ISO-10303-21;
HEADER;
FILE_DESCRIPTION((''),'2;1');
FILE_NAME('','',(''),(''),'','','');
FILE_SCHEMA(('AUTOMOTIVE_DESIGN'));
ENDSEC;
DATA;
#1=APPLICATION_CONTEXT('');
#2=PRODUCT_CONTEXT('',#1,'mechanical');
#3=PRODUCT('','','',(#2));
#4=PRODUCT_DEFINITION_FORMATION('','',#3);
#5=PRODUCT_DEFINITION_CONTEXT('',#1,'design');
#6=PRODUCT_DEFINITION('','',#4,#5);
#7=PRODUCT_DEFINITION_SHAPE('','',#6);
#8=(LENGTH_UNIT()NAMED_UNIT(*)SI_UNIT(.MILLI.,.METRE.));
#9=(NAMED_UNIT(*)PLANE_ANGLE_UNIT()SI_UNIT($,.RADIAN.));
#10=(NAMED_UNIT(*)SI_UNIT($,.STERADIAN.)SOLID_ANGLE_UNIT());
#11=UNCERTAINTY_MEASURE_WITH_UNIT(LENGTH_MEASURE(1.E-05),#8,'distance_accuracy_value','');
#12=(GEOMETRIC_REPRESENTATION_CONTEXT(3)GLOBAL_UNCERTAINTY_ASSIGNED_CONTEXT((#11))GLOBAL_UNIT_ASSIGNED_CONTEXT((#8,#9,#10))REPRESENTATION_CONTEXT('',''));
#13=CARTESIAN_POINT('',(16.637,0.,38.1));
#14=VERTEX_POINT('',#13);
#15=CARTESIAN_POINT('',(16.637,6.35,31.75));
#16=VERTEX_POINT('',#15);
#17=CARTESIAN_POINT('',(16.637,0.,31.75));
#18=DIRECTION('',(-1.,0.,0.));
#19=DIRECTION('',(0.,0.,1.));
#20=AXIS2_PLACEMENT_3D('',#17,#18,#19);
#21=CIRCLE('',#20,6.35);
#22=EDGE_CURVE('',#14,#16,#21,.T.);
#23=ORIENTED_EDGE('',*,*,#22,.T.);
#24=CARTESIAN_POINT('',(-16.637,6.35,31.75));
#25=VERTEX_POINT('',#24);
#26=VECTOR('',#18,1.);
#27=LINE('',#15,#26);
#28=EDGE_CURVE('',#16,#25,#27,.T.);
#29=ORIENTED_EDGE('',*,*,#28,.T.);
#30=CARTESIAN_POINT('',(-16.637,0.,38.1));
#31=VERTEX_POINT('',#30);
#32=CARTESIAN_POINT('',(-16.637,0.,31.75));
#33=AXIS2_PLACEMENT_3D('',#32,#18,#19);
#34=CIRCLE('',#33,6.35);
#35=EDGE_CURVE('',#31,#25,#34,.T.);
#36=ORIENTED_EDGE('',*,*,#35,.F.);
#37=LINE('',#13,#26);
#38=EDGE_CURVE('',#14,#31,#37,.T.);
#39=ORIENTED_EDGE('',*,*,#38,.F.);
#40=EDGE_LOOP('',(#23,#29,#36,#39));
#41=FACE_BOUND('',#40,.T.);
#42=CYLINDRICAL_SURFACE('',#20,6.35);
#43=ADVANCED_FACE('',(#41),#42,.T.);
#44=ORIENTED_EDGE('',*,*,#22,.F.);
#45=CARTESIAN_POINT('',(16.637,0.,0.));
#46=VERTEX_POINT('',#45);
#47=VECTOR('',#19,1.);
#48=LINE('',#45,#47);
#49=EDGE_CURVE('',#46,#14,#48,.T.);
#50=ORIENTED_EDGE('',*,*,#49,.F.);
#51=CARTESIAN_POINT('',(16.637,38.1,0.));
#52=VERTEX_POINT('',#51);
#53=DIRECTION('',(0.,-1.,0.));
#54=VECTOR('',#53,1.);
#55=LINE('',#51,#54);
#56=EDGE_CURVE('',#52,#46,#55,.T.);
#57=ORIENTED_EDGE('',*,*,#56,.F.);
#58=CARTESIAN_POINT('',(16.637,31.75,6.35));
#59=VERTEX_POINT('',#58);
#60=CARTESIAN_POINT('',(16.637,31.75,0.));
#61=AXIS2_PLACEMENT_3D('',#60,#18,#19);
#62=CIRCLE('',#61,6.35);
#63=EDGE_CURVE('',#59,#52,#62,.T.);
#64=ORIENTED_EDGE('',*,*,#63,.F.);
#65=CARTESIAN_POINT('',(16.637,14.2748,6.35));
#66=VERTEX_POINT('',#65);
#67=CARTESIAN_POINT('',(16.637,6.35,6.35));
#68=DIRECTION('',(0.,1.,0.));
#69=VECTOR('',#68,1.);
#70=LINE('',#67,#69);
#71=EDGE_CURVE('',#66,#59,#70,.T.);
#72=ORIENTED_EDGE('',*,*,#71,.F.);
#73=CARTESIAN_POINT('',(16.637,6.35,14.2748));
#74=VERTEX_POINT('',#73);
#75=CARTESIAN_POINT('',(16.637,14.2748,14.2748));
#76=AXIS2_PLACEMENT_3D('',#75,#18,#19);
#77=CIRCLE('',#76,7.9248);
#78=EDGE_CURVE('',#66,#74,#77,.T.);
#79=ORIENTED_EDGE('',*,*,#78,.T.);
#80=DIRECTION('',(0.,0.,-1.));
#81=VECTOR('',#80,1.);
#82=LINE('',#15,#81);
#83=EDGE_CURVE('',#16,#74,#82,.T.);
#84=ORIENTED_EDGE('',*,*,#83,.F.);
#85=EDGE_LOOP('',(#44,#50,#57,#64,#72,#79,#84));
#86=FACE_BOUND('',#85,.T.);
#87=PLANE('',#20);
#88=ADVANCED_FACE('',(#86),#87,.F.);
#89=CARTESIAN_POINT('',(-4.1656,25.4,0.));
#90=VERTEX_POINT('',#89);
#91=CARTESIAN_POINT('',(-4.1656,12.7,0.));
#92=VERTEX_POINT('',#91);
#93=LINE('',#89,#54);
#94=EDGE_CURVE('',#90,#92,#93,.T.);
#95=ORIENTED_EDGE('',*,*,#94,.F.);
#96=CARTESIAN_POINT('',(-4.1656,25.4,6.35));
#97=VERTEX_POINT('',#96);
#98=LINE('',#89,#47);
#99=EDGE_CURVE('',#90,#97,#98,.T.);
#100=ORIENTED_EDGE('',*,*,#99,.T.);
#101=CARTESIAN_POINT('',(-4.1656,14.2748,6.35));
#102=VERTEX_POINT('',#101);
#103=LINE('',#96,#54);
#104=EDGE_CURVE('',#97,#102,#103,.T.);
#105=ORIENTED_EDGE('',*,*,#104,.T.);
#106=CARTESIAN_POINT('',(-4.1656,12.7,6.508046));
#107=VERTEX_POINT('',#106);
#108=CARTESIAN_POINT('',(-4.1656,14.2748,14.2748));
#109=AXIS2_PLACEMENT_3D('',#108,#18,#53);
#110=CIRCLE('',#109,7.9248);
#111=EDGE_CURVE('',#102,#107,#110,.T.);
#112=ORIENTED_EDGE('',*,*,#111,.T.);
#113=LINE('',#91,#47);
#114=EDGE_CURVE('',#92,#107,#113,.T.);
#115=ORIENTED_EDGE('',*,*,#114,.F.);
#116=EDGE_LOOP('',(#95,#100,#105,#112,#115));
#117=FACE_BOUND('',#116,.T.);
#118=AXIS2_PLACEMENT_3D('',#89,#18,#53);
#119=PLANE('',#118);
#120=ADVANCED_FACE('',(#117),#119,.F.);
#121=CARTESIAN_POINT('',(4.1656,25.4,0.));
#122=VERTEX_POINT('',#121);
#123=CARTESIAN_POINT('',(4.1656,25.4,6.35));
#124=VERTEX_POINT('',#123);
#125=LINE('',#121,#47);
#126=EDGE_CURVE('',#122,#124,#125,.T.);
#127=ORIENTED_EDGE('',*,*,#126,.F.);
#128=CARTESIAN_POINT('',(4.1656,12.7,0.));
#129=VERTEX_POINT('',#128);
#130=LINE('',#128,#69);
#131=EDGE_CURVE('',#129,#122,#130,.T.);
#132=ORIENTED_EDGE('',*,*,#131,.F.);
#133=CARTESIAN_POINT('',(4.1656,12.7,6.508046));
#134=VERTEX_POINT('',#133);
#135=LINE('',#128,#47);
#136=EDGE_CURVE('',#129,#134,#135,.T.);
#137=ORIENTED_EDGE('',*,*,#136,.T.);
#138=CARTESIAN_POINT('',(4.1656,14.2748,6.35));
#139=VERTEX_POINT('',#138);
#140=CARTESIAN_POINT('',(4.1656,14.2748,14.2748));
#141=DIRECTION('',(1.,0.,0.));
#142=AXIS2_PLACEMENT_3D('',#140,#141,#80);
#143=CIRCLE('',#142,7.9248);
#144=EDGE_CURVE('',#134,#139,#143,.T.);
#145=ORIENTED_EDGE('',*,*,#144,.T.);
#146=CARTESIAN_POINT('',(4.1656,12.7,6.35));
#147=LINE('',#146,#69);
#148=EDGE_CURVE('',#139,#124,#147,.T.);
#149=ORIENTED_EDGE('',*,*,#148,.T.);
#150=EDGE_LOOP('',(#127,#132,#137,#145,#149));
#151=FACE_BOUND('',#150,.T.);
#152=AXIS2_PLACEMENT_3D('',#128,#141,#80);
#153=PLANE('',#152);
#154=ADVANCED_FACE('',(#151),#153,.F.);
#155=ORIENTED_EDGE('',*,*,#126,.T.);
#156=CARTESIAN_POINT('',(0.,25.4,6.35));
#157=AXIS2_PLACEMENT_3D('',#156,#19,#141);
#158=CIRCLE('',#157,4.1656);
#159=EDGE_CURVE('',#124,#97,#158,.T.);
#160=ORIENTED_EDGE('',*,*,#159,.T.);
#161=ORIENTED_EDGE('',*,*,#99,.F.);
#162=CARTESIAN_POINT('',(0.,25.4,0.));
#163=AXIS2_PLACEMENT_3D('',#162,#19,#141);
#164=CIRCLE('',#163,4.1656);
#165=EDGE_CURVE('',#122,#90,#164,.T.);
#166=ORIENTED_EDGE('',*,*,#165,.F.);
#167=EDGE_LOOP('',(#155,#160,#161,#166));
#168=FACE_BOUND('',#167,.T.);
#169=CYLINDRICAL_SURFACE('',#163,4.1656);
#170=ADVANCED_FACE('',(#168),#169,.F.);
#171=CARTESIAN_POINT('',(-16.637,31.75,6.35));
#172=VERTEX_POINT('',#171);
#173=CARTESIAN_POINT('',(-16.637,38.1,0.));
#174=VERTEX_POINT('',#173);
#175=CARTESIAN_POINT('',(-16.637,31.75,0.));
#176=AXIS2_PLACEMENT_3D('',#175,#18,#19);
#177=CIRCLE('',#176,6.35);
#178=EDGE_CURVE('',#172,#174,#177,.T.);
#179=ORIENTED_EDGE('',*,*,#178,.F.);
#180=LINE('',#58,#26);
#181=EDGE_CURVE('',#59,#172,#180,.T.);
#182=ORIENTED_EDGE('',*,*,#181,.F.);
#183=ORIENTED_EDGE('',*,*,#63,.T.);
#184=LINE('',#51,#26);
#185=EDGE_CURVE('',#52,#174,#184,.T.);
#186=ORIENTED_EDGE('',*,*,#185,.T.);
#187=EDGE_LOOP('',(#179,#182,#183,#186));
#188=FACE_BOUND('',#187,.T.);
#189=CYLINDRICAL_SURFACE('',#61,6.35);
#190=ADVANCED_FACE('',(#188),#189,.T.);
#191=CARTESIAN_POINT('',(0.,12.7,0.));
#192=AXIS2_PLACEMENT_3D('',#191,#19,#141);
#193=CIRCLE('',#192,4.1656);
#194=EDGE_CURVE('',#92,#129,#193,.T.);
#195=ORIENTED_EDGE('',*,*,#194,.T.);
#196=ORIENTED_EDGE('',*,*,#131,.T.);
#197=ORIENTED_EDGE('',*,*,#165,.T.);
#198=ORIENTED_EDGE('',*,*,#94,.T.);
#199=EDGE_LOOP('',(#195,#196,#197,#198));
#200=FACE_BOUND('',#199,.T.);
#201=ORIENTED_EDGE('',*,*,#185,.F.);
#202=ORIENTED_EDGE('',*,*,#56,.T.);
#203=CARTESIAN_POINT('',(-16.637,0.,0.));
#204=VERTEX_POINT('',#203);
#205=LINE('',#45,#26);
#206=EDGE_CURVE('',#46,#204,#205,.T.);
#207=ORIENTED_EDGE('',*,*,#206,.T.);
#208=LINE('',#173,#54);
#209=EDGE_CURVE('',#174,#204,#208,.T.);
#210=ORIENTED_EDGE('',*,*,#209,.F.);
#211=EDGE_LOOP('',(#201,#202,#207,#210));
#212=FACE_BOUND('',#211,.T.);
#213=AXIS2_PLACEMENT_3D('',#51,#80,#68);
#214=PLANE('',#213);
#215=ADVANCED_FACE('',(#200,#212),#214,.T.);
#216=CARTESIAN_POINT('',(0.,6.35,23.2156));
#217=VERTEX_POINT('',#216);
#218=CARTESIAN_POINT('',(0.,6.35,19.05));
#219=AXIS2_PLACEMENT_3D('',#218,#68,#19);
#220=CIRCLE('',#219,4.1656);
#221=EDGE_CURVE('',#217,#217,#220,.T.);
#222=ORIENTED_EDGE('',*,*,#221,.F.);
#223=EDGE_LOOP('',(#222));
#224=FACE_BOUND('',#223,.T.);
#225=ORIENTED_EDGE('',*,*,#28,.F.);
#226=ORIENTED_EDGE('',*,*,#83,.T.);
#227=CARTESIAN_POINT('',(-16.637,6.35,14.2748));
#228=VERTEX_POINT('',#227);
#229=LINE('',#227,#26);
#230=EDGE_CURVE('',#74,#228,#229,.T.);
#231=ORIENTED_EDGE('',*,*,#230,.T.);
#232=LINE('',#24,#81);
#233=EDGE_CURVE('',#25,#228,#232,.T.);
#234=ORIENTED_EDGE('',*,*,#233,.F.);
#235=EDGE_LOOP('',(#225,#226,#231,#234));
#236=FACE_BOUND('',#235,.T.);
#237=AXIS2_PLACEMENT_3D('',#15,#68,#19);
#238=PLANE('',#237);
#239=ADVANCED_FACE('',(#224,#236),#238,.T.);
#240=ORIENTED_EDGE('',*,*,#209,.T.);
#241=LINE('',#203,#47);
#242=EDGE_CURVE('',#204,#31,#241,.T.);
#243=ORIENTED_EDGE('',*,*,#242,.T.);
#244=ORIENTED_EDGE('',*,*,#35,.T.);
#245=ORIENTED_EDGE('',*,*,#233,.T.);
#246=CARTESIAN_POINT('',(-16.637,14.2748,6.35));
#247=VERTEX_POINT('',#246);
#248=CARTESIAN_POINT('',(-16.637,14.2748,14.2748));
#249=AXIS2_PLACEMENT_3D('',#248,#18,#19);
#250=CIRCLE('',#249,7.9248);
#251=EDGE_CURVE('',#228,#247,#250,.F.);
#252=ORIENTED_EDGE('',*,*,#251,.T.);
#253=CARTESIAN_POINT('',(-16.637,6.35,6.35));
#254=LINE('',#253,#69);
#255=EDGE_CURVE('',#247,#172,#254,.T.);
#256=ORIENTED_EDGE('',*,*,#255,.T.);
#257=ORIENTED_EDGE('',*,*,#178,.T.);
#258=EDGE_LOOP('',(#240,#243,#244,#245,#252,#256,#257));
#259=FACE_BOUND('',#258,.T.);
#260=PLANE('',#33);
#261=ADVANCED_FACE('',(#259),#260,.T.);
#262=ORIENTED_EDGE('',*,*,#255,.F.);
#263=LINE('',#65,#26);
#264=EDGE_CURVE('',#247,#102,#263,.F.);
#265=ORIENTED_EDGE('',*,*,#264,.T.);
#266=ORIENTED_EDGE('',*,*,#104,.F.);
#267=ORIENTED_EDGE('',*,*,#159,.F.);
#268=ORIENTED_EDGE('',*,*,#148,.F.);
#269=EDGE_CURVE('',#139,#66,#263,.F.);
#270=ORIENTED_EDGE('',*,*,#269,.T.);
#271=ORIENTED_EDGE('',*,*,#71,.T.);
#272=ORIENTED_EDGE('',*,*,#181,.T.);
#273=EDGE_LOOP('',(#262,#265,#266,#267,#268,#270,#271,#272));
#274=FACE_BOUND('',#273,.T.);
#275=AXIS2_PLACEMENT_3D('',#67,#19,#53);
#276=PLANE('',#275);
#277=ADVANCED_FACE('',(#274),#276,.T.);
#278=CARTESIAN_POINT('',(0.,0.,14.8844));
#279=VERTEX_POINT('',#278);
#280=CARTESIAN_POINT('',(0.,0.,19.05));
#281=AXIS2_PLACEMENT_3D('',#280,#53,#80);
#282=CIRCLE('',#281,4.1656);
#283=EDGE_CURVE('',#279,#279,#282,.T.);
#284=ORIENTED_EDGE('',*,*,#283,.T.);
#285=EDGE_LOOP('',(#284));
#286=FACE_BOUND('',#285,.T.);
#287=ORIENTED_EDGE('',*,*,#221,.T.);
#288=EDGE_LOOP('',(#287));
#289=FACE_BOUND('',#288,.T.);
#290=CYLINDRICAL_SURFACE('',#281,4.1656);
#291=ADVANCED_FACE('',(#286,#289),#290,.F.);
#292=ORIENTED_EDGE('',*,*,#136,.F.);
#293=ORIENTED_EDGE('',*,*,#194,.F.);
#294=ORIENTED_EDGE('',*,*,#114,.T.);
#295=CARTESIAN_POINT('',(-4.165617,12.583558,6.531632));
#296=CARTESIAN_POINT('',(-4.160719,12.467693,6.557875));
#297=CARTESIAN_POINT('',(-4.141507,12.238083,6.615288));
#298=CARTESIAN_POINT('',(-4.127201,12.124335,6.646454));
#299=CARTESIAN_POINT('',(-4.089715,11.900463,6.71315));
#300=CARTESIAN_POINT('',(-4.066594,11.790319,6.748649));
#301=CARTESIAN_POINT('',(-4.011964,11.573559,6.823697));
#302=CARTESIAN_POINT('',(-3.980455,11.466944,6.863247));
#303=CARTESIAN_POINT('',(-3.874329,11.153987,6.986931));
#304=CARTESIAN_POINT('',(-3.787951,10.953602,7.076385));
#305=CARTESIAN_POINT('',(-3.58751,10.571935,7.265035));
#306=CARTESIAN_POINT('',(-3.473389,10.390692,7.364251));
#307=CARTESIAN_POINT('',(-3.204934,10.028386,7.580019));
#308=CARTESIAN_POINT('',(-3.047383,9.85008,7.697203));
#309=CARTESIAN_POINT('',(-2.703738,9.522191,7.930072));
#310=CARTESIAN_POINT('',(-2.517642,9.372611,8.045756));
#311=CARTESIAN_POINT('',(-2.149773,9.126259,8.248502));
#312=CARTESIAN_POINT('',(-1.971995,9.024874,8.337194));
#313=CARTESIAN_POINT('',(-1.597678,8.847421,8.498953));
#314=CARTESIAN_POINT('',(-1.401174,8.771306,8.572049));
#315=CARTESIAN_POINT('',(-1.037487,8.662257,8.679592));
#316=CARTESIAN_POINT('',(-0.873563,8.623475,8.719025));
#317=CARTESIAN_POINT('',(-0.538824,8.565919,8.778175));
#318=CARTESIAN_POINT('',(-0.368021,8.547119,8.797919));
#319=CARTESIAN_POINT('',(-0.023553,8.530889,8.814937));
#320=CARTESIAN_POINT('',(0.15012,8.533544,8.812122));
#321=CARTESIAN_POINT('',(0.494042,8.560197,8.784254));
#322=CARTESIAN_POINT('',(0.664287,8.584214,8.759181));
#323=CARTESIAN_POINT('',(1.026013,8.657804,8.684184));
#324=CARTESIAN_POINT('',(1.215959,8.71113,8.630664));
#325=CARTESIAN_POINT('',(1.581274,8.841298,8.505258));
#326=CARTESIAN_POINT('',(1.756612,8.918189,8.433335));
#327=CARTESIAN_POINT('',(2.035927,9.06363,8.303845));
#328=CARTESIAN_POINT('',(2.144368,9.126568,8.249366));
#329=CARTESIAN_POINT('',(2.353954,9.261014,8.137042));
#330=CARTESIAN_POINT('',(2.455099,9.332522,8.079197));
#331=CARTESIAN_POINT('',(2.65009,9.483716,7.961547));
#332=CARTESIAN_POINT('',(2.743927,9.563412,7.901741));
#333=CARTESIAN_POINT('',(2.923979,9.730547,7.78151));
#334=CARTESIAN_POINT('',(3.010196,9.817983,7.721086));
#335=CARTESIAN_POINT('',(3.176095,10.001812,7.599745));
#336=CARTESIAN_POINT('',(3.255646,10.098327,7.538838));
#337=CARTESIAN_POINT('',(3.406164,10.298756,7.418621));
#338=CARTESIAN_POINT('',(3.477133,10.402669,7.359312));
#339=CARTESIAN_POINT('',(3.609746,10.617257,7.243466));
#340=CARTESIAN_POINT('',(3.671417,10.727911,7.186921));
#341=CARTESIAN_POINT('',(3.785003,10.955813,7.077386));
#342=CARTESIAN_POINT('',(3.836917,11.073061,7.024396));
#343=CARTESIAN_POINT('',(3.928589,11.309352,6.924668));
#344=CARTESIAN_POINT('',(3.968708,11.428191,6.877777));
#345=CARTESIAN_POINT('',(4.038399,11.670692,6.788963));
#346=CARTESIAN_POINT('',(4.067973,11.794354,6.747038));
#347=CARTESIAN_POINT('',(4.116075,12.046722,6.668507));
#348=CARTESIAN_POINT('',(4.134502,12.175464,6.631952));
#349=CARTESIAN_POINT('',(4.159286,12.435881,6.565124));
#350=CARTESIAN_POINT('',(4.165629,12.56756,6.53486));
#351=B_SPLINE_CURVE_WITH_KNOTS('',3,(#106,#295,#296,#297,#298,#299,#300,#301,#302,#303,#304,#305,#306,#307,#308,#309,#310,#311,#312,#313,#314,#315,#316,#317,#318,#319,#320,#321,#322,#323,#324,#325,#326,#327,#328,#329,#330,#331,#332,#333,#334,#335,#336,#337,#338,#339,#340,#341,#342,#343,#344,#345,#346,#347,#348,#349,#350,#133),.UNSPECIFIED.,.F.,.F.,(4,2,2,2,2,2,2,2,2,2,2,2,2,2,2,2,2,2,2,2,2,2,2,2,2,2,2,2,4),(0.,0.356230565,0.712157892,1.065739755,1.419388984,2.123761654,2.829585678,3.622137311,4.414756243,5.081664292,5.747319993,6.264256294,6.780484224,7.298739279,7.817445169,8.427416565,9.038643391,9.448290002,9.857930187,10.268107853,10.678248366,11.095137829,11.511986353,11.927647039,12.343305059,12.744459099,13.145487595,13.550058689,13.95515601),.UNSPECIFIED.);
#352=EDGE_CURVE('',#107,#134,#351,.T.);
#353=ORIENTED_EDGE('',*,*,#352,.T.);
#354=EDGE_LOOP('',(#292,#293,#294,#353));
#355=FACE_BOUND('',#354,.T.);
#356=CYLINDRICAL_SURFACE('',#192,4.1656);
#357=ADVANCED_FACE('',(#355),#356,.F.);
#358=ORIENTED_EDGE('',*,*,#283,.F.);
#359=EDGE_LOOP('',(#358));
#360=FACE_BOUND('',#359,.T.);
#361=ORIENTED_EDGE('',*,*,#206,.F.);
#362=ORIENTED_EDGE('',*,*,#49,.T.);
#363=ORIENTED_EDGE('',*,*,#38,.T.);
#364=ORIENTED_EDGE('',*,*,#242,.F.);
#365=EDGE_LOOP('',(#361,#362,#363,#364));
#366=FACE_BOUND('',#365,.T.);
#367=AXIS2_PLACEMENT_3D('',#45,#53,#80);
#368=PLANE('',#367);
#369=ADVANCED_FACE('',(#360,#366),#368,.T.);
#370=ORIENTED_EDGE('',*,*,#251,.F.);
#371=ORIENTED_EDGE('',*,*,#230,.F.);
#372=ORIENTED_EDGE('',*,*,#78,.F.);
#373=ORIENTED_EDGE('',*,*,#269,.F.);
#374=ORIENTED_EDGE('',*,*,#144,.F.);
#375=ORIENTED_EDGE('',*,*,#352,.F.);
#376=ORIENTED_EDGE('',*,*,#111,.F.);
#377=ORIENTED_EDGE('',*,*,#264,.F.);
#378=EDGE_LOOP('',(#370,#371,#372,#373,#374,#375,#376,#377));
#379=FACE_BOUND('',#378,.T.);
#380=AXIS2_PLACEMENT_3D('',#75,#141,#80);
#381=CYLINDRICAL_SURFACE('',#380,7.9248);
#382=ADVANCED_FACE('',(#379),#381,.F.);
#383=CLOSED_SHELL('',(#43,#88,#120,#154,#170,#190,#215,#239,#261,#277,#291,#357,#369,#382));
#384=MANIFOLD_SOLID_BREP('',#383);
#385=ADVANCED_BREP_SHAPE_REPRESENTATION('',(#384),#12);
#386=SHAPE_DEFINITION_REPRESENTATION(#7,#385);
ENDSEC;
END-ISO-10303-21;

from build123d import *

# Parameters (mm, degrees)
BOSS_EXTRUDE1_DEPTH          = 33.274
CUT_EXTRUDE1_DEPTH           = 53.31120596
F_5_16_CLEARANCE_HOLE1_D     = 8.3312
F_5_16_CLEARANCE_HOLE1_DEPTH = 38.1
FILLET1_START                = -16.637
FILLET1_DEPTH                = 12.4714
FILLET1_START_2              = 4.1656
FILLET1_2_DEPTH              = 12.4714
FILLET1_START_3              = 6.35
FILLET1_3_DEPTH              = 7.9248
FILLET1_START_4              = -4.1656
FILLET1_4_DEPTH              = 8.3312


with BuildPart() as part:
    # Sketch1 → Boss-Extrude1 (new body)
    with BuildSketch(Plane(origin=(-16.637, 0, 0), x_dir=(0, -1, 0), z_dir=(-1, 0, 0))):
        with BuildLine():
            Line((-6.35, 31.75), (-6.35, 6.35))
            Line((-6.35, 6.35), (-31.75, 6.35))
            ThreePointArc((-31.75, 6.35), (-36.240128061, 4.490128061), (-38.1, 0))
            Line((-38.1, 0), (0, 0))
            Line((0, 0), (0, 38.1))
            ThreePointArc((0, 38.1), (-4.490128061, 36.240128061), (-6.35, 31.75))
        make_face()
    extrude(amount=-BOSS_EXTRUDE1_DEPTH)

    # Sketch2 → Cut-Extrude1 (cut, through all)
    with BuildSketch(Plane.XY.offset(6.35)):
        with BuildLine():
            Line((4.1656, 12.7), (4.1656, 25.4))
            ThreePointArc((4.1656, 25.4), (0, 29.5656), (-4.1656, 25.4))
            Line((-4.1656, 25.4), (-4.1656, 12.7))
            ThreePointArc((-4.1656, 12.7), (0, 8.5344), (4.1656, 12.7))
        make_face()
    extrude(amount=-CUT_EXTRUDE1_DEPTH, mode=Mode.SUBTRACT)

    # 5/16 Clearance Hole1
    with Locations(Plane(origin=(0, 0, 0), x_dir=(-1, 0, 0), z_dir=(0, -1, 0))):
        with Locations((0, -19.05)):
            Hole(F_5_16_CLEARANCE_HOLE1_D / 2, depth=F_5_16_CLEARANCE_HOLE1_DEPTH)

    # Fillet1: read off the stored shape, not the designer's step
    # Fillet1 outline → Fillet1 (add)
    with BuildSketch(Plane.YZ.offset(FILLET1_START)):
        with BuildLine():
            ThreePointArc((14.2748, 6.35), (8.67112018, 8.67112018), (6.35, 14.2748))
            Line((6.35, 14.2748), (6.35, 6.35))
            Line((6.35, 6.35), (14.2748, 6.35))
        make_face()
    extrude(amount=FILLET1_DEPTH)

    # Fillet1 2 outline → Fillet1 2 (add)
    with BuildSketch(Plane.YZ.offset(FILLET1_START_2)):
        with BuildLine():
            ThreePointArc((14.2748, 6.35), (8.67112018, 8.67112018), (6.35, 14.2748))
            Line((6.35, 14.2748), (6.35, 6.35))
            Line((6.35, 6.35), (14.2748, 6.35))
        make_face()
    extrude(amount=FILLET1_2_DEPTH)

    # Fillet1 3 outline → Fillet1 3 (add)
    with BuildSketch(Plane.XY.offset(FILLET1_START_3)):
        with BuildLine():
            ThreePointArc((4.1656, 12.7), (0, 8.5344), (-4.1656, 12.7))
            Line((-4.1656, 12.7), (-4.1656, 6.35))
            Line((-4.1656, 6.35), (4.1656, 6.35))
            Line((4.1656, 6.35), (4.1656, 12.7))
        make_face()
    extrude(amount=FILLET1_3_DEPTH)

    # Fillet1 4 outline → Fillet1 4 (cut)
    with BuildSketch(Plane.YZ.offset(FILLET1_START_4)):
        with BuildLine():
            Line((14, 14.2748), (6.35, 14.2748))
            ThreePointArc((6.35, 14.2748), (8.574791663, 8.769133827), (14, 6.354765909))
            Line((14, 6.354765909), (14, 14.2748))
        make_face()
    extrude(amount=FILLET1_4_DEPTH, mode=Mode.SUBTRACT)


solid = part.part
